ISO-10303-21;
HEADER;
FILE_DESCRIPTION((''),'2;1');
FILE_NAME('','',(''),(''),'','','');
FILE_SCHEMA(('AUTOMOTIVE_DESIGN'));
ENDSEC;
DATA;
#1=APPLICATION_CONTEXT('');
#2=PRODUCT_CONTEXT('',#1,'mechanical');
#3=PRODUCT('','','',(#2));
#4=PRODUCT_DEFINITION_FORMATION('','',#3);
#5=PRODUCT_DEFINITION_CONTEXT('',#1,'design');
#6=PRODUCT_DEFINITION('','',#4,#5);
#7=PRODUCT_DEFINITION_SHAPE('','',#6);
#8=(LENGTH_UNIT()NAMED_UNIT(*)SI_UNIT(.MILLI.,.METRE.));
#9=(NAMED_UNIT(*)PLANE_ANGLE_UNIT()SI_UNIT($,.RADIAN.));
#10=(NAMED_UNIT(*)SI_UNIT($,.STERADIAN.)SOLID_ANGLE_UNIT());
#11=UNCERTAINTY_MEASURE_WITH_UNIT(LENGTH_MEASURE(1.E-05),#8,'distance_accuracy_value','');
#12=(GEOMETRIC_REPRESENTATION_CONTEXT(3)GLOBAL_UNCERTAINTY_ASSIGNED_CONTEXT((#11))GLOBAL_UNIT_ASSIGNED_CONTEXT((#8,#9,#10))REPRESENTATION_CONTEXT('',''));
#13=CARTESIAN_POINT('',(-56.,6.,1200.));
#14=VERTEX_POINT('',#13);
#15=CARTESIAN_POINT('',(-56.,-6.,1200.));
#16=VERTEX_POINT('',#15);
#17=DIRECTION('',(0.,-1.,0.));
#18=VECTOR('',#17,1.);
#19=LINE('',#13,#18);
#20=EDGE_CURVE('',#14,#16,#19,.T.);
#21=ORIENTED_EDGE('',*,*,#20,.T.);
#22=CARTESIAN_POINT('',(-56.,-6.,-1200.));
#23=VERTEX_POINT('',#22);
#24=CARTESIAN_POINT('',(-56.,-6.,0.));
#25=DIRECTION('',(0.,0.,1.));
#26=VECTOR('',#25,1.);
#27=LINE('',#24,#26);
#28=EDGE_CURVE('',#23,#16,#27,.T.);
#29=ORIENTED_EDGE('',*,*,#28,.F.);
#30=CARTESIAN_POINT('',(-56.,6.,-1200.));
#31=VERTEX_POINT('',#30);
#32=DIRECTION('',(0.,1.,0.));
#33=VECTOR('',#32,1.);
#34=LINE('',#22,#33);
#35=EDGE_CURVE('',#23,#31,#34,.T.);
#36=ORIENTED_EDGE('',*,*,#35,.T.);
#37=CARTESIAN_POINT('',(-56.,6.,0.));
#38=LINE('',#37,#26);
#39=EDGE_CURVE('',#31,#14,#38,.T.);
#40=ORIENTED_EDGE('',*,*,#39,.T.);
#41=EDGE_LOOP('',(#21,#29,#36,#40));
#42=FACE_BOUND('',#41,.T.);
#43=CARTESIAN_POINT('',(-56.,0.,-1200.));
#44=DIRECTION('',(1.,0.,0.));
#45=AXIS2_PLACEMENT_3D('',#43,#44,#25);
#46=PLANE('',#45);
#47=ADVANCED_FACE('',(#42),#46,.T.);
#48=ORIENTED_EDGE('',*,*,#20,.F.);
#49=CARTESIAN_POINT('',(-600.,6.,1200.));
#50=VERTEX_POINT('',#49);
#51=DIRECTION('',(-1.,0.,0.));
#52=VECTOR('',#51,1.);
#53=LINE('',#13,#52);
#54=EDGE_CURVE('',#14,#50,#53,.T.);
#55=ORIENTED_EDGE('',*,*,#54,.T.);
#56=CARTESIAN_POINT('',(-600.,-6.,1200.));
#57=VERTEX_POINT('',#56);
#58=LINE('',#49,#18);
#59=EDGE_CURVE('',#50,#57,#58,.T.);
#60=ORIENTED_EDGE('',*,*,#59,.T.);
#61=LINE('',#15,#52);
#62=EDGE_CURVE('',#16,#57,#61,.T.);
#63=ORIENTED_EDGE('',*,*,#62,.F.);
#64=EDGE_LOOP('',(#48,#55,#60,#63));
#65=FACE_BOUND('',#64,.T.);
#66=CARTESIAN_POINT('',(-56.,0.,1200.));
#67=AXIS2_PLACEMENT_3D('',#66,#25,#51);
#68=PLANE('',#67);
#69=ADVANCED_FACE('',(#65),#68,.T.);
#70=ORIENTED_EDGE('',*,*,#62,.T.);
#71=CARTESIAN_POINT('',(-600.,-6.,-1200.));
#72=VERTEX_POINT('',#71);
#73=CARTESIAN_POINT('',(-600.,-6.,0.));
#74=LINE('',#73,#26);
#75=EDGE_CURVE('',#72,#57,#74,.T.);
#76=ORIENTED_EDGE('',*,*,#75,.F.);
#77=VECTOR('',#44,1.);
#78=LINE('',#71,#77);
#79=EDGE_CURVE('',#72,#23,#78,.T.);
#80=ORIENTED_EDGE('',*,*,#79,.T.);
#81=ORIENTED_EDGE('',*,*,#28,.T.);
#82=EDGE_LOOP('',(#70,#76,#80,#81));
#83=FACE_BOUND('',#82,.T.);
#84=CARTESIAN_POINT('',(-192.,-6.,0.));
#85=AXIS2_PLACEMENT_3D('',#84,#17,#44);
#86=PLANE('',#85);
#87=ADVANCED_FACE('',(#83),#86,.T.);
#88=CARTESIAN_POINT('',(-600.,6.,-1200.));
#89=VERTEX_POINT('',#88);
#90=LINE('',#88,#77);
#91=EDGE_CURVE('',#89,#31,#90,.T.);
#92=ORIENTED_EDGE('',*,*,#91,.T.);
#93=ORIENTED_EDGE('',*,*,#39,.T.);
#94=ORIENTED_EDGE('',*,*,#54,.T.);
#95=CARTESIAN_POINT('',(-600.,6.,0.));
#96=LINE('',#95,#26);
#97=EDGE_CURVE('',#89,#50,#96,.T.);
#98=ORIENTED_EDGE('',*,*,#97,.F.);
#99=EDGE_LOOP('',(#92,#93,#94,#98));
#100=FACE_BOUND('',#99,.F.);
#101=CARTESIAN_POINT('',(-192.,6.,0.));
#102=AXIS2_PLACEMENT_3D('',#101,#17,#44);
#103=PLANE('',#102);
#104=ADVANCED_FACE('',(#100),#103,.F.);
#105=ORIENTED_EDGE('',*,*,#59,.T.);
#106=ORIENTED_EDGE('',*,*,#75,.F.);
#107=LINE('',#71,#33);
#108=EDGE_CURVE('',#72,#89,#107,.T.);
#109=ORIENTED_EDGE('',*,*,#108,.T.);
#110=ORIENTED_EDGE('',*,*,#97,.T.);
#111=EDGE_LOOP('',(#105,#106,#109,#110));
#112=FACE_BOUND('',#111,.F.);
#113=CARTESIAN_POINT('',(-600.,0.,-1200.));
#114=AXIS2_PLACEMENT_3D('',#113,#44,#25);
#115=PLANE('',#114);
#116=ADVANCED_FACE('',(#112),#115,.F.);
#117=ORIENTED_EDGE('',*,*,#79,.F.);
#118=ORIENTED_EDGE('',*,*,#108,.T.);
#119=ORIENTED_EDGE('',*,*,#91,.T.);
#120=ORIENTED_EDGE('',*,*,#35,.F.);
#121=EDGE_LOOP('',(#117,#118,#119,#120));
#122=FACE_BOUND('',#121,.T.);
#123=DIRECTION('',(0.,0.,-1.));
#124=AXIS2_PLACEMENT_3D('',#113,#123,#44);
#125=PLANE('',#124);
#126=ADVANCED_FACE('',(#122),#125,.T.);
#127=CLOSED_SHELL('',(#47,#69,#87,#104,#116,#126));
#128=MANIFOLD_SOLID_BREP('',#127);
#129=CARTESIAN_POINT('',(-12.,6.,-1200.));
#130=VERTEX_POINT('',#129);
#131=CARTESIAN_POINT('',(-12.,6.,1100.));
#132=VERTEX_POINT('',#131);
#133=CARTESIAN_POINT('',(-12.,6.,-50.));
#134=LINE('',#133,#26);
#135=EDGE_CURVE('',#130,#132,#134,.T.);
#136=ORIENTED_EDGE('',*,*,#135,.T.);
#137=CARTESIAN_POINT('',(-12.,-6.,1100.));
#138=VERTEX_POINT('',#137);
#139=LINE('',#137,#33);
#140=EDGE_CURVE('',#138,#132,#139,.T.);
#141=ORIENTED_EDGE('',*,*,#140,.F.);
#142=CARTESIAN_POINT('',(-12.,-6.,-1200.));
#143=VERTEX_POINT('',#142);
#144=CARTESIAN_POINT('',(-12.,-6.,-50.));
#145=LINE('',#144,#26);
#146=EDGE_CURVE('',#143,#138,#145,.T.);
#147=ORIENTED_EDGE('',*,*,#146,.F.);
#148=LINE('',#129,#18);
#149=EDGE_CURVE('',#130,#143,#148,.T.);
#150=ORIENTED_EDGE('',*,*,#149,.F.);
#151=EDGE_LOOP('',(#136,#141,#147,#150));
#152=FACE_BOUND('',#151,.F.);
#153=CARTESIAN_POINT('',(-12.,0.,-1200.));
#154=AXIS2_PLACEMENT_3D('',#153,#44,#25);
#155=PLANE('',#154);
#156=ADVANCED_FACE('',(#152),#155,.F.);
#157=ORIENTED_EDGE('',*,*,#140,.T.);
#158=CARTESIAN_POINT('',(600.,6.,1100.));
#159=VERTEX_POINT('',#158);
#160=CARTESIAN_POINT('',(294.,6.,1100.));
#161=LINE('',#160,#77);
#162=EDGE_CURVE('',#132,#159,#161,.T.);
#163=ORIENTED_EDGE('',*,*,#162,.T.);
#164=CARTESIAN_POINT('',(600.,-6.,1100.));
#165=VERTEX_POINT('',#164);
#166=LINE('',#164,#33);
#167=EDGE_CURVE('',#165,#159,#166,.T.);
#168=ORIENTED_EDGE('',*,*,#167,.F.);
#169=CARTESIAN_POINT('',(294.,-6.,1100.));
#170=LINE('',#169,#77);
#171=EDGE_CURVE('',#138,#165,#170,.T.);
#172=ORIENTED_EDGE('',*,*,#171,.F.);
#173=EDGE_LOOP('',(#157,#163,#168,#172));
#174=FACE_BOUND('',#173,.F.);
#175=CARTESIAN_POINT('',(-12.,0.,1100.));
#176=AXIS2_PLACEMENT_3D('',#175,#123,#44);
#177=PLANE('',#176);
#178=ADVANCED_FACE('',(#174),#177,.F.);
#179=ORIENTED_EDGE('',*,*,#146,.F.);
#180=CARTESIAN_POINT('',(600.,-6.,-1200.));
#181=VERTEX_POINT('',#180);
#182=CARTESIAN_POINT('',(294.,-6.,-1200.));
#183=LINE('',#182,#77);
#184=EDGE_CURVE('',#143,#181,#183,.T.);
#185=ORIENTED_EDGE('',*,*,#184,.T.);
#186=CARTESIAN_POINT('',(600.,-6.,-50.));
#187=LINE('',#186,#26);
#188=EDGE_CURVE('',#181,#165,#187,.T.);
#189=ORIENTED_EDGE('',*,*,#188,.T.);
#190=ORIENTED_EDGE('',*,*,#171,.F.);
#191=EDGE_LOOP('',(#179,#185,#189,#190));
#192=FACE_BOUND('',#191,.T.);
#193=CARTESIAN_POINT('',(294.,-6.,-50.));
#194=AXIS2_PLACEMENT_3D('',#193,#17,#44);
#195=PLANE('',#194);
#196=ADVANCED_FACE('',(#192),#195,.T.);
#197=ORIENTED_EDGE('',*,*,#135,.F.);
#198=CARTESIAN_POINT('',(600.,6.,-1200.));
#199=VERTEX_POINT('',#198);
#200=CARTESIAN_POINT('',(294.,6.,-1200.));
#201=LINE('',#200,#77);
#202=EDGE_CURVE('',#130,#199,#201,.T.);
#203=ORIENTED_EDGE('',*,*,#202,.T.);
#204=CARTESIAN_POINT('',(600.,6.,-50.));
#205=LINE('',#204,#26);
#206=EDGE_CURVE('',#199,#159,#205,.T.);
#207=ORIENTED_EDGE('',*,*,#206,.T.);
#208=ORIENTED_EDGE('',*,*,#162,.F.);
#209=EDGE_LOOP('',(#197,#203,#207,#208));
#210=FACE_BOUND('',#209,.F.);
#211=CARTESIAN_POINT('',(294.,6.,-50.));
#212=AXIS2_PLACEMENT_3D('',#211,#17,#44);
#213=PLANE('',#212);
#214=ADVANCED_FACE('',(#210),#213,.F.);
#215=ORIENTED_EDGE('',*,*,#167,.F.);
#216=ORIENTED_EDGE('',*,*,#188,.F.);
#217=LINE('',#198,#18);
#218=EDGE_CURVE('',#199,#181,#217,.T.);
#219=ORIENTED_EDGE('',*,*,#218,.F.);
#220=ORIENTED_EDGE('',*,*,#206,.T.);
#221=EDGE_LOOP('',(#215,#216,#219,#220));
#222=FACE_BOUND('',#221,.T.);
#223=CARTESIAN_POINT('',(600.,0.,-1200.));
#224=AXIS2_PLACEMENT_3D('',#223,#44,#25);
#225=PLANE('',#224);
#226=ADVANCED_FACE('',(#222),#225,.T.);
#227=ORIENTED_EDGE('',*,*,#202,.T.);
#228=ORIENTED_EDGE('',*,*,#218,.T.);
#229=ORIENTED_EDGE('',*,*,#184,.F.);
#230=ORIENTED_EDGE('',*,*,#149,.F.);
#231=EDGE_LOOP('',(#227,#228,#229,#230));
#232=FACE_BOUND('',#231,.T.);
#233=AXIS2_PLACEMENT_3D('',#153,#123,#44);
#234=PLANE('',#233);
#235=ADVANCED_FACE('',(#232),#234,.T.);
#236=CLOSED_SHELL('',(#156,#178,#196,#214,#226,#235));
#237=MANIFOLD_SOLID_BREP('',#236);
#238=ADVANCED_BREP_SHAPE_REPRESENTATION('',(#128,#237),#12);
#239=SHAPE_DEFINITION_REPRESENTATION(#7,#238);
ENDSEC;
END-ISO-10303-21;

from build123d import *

# Parameters (mm, degrees)
F0_W     = 612
F0_H     = 2300
F1_DEPTH = 6
F0_W_2   = 272
F0_H_2   = 2400


with BuildPart() as f1:
    # F0 (on Front) → F1 (new body, symmetric)
    with BuildSketch(Plane.XZ):
        with Locations((294, -50)):
            Rectangle(F0_W, F0_H)
    extrude(amount=F1_DEPTH, both=True)


with BuildPart() as f1b:
    # F0 (on Front) → F1, piece 2 (new body, symmetric)
    with BuildSketch(Plane.XZ):
        with Locations((-192, 0)):
            Rectangle(F0_W_2, F0_H_2)
        with Locations((-464, 0)):
            Rectangle(F0_W_2, F0_H_2)
    extrude(amount=F1_DEPTH, both=True)


solid = Compound([f1.part, f1b.part])
